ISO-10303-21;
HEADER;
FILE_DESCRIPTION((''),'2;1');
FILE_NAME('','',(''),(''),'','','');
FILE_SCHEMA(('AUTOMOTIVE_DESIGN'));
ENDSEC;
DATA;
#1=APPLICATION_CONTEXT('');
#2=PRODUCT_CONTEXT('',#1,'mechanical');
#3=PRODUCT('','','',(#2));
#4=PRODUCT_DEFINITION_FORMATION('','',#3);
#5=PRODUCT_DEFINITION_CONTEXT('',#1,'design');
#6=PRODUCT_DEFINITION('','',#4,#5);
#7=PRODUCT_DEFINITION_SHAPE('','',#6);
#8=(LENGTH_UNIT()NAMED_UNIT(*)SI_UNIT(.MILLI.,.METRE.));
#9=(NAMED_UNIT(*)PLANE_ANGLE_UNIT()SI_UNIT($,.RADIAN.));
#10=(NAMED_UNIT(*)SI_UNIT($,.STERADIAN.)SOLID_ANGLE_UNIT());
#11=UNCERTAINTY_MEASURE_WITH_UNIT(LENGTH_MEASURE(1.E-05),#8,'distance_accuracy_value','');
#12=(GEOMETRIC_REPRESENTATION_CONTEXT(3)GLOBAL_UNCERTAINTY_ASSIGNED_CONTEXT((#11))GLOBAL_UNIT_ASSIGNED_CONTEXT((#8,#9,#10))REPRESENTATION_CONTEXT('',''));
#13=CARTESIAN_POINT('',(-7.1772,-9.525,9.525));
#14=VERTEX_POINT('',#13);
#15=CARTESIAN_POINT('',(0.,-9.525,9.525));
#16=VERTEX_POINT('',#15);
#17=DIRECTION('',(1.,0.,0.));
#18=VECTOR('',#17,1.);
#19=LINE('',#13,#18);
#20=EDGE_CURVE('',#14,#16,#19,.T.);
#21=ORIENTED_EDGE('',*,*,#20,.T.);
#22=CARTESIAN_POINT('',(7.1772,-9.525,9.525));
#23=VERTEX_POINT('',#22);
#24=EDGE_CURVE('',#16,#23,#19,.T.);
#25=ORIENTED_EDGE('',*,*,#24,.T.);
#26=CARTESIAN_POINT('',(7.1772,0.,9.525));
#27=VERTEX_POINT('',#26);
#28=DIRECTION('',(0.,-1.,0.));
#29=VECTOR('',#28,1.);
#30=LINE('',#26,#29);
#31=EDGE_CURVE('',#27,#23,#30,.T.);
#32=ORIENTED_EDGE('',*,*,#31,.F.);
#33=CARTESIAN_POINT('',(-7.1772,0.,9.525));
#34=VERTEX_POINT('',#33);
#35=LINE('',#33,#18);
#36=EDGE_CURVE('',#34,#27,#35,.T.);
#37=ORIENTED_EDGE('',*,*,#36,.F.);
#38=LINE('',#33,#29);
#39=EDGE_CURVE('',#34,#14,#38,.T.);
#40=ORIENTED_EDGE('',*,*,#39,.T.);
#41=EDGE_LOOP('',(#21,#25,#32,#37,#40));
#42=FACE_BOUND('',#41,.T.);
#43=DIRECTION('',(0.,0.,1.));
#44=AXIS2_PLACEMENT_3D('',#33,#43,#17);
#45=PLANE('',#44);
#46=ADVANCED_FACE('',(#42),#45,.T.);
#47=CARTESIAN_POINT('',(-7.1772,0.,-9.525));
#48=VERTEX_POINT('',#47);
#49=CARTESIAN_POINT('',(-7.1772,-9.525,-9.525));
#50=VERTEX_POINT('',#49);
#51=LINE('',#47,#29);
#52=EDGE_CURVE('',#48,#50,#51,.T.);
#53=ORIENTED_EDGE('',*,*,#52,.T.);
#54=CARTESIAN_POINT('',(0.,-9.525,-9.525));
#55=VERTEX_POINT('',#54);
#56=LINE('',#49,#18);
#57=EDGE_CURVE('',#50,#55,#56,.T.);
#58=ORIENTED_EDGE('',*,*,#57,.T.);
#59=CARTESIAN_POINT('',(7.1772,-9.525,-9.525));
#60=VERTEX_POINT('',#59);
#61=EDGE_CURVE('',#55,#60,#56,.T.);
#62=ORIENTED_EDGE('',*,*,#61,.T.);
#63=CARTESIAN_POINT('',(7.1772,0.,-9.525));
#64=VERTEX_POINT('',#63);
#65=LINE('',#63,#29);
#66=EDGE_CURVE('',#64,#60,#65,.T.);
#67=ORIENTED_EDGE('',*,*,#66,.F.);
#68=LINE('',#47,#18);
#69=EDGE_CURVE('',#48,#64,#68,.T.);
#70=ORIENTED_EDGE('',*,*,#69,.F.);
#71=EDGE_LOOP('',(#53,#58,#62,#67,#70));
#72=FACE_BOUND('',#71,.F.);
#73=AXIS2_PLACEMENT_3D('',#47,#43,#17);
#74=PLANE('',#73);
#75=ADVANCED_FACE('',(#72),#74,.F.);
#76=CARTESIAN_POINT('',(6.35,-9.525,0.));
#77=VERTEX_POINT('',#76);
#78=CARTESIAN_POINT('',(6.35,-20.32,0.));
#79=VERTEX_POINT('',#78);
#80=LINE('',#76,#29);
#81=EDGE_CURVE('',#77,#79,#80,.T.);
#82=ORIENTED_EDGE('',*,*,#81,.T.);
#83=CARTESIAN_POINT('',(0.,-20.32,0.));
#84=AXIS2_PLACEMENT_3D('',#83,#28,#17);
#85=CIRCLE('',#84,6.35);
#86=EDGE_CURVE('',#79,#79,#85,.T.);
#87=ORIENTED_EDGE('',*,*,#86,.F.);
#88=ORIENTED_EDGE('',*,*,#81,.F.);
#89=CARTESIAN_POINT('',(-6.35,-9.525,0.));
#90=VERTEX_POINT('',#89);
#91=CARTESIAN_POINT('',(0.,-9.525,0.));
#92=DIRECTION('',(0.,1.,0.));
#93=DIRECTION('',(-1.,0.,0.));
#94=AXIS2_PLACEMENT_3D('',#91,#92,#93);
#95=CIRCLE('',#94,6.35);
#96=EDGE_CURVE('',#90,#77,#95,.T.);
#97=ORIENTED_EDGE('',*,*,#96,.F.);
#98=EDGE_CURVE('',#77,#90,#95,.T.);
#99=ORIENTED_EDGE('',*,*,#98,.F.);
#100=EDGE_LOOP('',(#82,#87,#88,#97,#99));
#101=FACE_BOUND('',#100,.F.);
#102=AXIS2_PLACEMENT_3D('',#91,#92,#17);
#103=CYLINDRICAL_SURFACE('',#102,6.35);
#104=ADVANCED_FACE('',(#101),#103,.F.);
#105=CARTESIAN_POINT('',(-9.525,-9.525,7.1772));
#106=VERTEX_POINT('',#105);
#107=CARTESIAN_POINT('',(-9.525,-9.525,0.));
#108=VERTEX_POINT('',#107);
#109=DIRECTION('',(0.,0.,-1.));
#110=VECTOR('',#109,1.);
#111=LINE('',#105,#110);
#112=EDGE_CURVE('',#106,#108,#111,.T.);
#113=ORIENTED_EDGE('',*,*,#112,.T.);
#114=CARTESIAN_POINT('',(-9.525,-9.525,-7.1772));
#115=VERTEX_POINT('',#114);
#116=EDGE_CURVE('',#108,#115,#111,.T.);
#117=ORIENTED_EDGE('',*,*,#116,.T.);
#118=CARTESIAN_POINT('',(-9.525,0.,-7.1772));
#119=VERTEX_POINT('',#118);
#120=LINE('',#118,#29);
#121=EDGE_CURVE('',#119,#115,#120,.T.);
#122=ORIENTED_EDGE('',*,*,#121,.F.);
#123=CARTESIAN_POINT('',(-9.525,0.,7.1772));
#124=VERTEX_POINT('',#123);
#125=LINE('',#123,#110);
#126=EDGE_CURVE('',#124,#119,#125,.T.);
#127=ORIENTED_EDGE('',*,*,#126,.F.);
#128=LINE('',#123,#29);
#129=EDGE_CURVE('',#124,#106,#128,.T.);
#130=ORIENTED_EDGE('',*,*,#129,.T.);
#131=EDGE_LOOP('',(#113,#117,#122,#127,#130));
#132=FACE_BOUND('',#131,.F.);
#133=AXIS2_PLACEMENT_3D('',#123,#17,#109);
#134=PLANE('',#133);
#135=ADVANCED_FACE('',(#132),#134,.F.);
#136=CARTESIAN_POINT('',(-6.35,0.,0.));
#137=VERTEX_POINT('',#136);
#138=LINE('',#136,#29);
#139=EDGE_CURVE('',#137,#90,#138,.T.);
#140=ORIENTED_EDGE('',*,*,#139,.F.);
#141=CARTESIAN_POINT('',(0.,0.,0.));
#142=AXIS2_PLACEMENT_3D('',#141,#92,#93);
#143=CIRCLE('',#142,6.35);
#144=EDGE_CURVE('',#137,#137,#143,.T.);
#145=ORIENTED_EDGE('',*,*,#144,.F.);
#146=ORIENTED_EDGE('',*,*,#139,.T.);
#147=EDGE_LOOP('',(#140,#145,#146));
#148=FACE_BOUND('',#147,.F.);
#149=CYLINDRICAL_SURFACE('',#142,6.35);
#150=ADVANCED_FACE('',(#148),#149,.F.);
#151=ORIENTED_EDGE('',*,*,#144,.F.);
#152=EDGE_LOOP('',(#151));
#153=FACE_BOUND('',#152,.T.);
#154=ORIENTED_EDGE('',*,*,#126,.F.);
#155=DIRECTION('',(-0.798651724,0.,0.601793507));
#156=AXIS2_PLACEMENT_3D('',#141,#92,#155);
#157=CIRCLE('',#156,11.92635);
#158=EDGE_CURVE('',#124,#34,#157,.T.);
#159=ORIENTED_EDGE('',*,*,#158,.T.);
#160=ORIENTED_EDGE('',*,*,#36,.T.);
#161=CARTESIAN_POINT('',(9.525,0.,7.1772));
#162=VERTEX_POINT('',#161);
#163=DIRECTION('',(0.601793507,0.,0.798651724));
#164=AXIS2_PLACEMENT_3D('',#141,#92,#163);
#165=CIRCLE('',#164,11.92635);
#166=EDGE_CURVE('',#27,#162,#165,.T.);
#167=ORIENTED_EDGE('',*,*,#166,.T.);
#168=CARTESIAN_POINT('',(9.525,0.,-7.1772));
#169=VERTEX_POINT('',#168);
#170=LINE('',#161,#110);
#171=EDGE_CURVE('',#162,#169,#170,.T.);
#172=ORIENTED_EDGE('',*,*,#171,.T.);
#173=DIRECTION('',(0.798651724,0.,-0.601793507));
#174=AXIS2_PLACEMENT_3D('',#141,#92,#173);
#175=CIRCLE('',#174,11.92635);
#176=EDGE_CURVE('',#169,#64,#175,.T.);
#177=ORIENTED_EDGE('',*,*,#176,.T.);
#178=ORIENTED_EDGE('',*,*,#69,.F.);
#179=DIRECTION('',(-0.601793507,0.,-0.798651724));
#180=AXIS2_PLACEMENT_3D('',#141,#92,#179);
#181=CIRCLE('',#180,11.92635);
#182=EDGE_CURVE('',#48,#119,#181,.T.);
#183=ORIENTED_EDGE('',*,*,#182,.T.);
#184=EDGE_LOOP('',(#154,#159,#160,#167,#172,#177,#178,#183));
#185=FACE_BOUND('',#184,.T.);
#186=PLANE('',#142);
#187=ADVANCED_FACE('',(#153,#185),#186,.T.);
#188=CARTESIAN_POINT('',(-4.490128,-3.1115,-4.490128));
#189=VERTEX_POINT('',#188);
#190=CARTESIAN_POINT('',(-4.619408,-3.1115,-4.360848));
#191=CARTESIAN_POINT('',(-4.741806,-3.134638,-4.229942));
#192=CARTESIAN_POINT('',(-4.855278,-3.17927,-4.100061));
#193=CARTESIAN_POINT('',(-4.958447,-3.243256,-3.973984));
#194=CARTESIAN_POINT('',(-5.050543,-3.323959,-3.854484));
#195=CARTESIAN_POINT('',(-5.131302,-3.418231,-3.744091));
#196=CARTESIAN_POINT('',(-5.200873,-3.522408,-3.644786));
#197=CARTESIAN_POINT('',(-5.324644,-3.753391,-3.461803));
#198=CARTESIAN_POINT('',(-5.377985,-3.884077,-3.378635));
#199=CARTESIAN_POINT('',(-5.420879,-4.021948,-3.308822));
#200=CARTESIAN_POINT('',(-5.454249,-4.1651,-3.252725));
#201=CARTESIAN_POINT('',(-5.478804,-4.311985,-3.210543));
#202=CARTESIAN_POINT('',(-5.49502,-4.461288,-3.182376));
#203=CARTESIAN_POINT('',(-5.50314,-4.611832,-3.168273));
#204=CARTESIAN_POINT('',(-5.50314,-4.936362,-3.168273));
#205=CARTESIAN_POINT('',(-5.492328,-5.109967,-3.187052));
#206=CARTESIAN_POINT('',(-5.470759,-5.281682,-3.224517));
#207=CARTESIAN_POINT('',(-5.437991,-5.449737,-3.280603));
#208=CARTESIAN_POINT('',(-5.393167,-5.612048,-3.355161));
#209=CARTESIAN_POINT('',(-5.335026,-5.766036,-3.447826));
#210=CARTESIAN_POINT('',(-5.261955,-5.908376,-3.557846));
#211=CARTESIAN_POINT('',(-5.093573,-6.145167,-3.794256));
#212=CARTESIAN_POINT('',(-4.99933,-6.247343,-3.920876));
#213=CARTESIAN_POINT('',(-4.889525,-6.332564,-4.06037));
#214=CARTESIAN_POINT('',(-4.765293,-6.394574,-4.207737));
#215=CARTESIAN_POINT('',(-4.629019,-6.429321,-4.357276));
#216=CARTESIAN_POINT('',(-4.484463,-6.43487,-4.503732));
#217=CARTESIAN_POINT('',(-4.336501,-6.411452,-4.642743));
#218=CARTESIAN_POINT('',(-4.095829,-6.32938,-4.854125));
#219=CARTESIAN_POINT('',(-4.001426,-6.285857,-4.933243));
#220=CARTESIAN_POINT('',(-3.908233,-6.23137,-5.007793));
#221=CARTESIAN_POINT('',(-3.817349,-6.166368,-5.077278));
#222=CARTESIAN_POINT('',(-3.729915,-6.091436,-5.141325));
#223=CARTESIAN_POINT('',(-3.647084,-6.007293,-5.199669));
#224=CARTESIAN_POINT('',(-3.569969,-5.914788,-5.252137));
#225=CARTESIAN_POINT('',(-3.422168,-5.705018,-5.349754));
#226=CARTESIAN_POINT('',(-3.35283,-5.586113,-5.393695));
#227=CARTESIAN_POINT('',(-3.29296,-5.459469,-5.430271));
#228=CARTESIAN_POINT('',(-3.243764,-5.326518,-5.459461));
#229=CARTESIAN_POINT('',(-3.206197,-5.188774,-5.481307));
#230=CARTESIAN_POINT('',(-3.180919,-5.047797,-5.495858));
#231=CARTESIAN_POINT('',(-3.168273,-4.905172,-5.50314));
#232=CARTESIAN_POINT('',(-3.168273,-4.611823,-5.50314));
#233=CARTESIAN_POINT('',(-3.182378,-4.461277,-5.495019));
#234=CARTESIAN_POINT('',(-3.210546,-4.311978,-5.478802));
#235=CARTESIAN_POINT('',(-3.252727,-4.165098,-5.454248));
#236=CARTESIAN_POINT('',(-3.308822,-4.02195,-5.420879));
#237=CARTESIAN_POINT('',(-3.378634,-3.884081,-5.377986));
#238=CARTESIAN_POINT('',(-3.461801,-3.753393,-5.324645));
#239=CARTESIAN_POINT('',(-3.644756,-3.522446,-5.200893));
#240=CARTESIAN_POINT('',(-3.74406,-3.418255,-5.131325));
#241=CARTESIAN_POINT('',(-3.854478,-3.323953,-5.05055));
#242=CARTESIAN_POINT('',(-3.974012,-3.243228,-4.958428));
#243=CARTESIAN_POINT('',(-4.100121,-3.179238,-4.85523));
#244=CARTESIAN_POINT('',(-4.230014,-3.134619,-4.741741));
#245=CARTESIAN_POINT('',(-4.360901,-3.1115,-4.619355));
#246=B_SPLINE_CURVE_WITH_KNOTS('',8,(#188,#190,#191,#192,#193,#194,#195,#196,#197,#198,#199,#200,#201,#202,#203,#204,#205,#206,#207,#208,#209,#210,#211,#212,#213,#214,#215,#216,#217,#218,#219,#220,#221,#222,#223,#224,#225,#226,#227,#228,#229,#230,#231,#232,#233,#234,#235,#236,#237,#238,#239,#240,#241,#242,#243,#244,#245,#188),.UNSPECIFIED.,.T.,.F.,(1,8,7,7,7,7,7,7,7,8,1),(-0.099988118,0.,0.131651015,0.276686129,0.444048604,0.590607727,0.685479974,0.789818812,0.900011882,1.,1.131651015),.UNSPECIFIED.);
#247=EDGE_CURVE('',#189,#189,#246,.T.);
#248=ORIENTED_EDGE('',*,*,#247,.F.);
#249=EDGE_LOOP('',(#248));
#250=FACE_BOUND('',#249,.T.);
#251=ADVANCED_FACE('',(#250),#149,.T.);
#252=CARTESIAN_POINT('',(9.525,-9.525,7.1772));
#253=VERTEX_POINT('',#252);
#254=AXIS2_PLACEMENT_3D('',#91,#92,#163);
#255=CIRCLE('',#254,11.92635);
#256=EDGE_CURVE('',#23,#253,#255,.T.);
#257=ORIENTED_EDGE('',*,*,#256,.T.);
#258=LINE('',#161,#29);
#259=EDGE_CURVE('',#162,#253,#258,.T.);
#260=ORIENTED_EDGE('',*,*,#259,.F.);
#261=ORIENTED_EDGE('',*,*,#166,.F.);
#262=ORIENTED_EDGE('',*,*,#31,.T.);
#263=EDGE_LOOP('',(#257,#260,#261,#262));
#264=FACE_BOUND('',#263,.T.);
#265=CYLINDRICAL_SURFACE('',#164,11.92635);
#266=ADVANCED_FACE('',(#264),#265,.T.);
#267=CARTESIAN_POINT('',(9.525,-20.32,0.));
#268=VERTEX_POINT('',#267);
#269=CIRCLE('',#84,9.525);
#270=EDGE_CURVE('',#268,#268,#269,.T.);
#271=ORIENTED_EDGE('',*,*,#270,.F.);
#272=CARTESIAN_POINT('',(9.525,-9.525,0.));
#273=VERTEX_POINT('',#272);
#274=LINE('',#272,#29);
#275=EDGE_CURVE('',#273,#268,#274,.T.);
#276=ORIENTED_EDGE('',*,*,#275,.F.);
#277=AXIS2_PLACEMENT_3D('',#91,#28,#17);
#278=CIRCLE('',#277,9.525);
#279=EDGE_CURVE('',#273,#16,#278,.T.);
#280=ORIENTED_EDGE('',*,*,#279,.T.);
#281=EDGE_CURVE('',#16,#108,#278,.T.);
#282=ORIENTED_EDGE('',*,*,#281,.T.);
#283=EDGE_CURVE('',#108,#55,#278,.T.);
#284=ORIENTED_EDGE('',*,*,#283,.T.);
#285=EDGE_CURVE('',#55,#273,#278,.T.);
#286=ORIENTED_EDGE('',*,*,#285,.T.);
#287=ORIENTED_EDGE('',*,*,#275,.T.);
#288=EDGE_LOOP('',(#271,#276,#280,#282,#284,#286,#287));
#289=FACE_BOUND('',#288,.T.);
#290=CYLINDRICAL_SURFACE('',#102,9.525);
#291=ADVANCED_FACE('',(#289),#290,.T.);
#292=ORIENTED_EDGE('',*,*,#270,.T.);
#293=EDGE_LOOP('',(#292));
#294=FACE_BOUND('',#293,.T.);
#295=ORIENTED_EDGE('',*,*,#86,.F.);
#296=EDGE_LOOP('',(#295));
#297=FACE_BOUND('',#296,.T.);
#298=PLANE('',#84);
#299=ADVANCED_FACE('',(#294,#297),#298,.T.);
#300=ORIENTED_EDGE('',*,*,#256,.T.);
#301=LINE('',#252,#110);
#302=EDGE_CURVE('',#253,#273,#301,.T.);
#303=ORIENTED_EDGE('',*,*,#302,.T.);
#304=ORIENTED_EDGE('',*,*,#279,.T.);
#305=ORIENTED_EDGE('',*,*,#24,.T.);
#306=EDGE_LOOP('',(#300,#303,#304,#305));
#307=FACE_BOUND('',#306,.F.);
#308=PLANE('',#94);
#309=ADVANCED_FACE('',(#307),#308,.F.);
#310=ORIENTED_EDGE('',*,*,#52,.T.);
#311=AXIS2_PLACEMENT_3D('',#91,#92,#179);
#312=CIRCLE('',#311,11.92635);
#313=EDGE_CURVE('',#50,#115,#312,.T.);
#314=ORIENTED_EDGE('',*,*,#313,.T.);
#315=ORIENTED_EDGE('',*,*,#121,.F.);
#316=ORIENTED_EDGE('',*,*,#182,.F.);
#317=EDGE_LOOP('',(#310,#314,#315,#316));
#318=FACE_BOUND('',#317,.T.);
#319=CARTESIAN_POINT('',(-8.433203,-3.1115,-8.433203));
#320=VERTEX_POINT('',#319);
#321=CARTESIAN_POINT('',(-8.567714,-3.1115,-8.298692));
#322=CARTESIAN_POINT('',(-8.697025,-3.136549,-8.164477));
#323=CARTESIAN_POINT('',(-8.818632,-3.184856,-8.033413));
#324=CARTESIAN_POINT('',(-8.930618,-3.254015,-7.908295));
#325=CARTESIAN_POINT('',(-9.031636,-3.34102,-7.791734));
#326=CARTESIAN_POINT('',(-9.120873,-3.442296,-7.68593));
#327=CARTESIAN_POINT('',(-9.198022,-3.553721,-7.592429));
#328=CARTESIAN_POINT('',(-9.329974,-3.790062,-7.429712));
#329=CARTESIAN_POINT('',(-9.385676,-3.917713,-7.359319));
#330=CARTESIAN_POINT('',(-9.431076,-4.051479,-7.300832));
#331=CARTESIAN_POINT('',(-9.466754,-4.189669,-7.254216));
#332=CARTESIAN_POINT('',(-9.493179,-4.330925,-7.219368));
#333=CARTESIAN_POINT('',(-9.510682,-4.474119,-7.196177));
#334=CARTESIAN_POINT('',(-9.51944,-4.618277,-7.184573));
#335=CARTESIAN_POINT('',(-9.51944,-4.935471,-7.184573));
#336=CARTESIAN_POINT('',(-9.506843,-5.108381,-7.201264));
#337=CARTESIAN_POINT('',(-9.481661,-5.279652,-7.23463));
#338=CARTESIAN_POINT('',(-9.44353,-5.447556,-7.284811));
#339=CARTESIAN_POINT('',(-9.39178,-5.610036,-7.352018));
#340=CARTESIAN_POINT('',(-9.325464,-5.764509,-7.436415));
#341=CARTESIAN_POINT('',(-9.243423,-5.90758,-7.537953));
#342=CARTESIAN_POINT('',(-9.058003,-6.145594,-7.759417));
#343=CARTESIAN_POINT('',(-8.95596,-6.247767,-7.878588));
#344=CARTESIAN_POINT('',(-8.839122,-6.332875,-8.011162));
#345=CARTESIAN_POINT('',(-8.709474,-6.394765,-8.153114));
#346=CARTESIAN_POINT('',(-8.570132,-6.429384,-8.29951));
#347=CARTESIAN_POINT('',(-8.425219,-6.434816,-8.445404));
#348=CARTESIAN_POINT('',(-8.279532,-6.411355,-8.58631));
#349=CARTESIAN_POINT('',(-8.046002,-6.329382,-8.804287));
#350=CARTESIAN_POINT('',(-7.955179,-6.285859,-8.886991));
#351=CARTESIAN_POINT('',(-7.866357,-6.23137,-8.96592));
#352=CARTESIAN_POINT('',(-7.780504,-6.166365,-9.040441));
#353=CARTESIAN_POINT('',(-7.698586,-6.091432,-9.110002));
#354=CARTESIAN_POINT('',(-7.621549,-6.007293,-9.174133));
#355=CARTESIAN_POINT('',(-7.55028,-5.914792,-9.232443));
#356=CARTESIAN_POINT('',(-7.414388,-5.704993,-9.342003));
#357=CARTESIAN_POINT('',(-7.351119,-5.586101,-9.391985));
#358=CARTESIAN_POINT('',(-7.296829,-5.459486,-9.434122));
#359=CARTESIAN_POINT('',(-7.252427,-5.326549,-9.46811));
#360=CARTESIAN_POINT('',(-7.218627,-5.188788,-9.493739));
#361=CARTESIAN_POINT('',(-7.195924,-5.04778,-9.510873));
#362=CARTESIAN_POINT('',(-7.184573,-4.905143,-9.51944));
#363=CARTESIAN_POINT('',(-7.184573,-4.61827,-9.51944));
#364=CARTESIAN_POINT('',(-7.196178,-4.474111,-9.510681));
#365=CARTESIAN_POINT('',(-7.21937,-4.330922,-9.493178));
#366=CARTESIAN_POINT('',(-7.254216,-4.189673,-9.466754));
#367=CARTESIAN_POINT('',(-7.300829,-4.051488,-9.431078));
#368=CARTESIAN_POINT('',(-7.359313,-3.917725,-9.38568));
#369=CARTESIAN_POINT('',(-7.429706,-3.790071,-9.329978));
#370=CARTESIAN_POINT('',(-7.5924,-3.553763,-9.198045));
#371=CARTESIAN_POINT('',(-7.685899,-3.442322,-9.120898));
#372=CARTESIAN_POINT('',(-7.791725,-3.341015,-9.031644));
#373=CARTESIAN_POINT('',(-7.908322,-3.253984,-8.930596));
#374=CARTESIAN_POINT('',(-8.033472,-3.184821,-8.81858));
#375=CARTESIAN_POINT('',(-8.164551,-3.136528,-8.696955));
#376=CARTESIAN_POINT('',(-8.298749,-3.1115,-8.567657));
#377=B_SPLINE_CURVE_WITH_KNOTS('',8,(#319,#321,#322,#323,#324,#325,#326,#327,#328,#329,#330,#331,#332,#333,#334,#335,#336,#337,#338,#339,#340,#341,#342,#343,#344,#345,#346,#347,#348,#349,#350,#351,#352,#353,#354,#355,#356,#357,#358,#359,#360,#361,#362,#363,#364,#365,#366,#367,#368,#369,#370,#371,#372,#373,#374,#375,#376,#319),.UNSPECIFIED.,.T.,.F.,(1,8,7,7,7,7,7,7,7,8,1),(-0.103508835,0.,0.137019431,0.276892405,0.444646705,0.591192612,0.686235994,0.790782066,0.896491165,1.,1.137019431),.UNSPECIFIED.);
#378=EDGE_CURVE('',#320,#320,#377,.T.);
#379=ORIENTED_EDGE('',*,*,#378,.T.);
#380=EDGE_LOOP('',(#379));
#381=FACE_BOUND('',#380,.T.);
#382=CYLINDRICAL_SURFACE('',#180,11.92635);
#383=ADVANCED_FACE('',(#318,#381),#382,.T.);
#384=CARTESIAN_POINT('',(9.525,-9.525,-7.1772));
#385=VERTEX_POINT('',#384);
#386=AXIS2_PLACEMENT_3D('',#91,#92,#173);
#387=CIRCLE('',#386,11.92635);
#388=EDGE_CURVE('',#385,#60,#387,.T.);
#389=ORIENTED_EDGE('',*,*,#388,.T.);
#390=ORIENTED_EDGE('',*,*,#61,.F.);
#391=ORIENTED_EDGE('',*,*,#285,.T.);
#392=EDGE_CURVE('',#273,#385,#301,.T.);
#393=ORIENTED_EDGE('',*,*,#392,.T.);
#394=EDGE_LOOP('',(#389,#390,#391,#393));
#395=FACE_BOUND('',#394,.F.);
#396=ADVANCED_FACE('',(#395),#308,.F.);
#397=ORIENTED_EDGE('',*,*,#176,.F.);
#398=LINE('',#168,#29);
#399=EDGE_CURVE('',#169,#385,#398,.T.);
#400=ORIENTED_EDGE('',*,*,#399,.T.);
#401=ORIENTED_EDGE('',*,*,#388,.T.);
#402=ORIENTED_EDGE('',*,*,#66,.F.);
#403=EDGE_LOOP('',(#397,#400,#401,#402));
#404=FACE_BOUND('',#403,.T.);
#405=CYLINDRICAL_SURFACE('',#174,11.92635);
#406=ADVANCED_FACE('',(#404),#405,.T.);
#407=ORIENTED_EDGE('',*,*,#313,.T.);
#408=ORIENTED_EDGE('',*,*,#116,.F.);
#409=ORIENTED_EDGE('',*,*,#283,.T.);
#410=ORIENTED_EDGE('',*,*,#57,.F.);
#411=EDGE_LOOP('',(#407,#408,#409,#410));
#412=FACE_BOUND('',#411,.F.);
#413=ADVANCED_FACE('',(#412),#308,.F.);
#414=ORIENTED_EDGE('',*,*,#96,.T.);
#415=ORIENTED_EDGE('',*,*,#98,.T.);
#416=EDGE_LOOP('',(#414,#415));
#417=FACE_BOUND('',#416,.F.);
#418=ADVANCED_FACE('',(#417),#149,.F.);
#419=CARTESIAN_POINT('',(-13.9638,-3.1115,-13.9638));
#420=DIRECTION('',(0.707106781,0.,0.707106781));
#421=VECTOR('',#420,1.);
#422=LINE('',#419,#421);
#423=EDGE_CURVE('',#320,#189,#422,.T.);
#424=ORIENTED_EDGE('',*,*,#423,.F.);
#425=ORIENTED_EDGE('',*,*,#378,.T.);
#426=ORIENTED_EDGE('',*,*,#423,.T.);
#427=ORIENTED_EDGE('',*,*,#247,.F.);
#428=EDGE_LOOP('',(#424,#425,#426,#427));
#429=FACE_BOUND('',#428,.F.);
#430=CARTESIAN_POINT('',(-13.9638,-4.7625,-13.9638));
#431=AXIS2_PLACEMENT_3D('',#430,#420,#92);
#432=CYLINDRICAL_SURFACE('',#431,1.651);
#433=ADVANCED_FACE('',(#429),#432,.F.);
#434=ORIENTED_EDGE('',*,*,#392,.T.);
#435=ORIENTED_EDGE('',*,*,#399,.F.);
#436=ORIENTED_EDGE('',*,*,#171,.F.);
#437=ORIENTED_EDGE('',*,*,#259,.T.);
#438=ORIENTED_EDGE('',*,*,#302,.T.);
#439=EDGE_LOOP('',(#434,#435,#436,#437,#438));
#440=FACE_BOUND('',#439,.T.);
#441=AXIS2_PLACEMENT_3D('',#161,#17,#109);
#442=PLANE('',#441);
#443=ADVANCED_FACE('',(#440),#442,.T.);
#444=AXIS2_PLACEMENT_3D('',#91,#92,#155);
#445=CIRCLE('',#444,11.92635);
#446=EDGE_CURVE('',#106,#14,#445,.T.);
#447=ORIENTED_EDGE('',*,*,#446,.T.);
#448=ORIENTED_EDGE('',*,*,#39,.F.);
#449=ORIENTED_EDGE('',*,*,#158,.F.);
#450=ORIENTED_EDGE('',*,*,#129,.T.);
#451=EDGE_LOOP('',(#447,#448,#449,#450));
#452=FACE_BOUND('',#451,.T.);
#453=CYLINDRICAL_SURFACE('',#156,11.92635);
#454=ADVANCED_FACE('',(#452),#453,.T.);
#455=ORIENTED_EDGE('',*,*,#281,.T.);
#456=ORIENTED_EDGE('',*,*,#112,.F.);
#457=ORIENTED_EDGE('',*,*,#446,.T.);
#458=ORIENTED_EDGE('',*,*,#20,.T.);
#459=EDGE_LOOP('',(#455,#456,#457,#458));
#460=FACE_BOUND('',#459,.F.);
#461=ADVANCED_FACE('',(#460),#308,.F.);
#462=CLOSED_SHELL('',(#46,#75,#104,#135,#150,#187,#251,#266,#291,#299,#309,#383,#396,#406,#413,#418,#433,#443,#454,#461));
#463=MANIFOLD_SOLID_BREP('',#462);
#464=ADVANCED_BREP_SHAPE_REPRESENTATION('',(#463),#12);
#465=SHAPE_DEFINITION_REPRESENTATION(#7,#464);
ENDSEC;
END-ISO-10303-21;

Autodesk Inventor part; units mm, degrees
ref_plane "YZ Plane" through (0, 0, 0) normal (1, 0, 0) x (0, 1, 0)
ref_plane "XZ Plane" through (0, 0, 0) normal (0, 1, 0) x (-1, 0, 0)
sketch "Sketch1" plane through (0, 0, 0) normal (0, 1, 0) x (-1, 0, 0)
  circle A0 centre (0, 0) radius 6.35
  line L0 (9.525, 7.1772) -> (9.525, -7.1772)
  line L1 (-9.525, 7.1772) -> (-9.525, -7.1772)
  line L2 (7.1772, 9.525) -> (-7.1772, 9.525)
  line L3 (7.1772, -9.525) -> (-7.1772, -9.525)
  arc A1 (7.1772, -9.525) -> (9.525, -7.1772) centre (0, 0) ccw
  arc A2 (9.525, 7.1772) -> (7.1772, 9.525) centre (0, 0) ccw
  arc A3 (-7.1772, 9.525) -> (-9.525, 7.1772) centre (0, 0) ccw
  arc A4 (-9.525, -7.1772) -> (-7.1772, -9.525) centre (0, 0) ccw
  dimension "d0" = 12.7
  dimension "d2" = 9.525
  dimension "d3" = 9.525
  dimension "d4" = 9.525
  dimension "d5" = 9.525
extrude "Extrusion1" add sketch "Sketch1" against normal blind 9.525
sketch "Sketch2" plane through (0, -9.525, 0) normal (0, -1, 0) x (1, 0, 0)
  circle A0 centre (0, 0) radius 9.525
  circle A1 centre (0, 0) radius 6.35 projected
  dimension "d8" = 19.05
extrude "Extrusion2" add sketch "Sketch2" along normal blind 10.795
ref_plane "Work Plane2" through (-15.1377, 0, -12.7898) normal (0.7071068, 0, 0.7071068) x (0, -1, 0)
ref_plane "Work Plane1" through (-9.525, 0, -7.1772) normal (0.7071068, 0, 0.7071068) x (0, -1, 0)
sketch "Sketch3" plane through (-15.1377, 0, -12.7898) normal (0.7071068, 0, 0.7071068) x (0, -1, 0)
  line L0 (0, 3.3203) -> (9.525, 3.3203) projected
  line L1 (0, 0) -> (9.525, 0) projected
  point P0 (0, 1.6602)
  point P1 (4.7625, 1.6602)
hole "Hole1" at (-13.9638, -4.7625, -13.9638) direction (0.7071068, 0, 0.7071068) diameter 3.302 end up to surface thread size "8-32 UNC" class "2B" standard "ANSI Unified Screw Threads"
equation "\"d3\" = d2"
equation "\"d4\" = d2"
equation "\"d5\" = d4"
properties part number "TH81-RS81" material "Aluminum 6061"
